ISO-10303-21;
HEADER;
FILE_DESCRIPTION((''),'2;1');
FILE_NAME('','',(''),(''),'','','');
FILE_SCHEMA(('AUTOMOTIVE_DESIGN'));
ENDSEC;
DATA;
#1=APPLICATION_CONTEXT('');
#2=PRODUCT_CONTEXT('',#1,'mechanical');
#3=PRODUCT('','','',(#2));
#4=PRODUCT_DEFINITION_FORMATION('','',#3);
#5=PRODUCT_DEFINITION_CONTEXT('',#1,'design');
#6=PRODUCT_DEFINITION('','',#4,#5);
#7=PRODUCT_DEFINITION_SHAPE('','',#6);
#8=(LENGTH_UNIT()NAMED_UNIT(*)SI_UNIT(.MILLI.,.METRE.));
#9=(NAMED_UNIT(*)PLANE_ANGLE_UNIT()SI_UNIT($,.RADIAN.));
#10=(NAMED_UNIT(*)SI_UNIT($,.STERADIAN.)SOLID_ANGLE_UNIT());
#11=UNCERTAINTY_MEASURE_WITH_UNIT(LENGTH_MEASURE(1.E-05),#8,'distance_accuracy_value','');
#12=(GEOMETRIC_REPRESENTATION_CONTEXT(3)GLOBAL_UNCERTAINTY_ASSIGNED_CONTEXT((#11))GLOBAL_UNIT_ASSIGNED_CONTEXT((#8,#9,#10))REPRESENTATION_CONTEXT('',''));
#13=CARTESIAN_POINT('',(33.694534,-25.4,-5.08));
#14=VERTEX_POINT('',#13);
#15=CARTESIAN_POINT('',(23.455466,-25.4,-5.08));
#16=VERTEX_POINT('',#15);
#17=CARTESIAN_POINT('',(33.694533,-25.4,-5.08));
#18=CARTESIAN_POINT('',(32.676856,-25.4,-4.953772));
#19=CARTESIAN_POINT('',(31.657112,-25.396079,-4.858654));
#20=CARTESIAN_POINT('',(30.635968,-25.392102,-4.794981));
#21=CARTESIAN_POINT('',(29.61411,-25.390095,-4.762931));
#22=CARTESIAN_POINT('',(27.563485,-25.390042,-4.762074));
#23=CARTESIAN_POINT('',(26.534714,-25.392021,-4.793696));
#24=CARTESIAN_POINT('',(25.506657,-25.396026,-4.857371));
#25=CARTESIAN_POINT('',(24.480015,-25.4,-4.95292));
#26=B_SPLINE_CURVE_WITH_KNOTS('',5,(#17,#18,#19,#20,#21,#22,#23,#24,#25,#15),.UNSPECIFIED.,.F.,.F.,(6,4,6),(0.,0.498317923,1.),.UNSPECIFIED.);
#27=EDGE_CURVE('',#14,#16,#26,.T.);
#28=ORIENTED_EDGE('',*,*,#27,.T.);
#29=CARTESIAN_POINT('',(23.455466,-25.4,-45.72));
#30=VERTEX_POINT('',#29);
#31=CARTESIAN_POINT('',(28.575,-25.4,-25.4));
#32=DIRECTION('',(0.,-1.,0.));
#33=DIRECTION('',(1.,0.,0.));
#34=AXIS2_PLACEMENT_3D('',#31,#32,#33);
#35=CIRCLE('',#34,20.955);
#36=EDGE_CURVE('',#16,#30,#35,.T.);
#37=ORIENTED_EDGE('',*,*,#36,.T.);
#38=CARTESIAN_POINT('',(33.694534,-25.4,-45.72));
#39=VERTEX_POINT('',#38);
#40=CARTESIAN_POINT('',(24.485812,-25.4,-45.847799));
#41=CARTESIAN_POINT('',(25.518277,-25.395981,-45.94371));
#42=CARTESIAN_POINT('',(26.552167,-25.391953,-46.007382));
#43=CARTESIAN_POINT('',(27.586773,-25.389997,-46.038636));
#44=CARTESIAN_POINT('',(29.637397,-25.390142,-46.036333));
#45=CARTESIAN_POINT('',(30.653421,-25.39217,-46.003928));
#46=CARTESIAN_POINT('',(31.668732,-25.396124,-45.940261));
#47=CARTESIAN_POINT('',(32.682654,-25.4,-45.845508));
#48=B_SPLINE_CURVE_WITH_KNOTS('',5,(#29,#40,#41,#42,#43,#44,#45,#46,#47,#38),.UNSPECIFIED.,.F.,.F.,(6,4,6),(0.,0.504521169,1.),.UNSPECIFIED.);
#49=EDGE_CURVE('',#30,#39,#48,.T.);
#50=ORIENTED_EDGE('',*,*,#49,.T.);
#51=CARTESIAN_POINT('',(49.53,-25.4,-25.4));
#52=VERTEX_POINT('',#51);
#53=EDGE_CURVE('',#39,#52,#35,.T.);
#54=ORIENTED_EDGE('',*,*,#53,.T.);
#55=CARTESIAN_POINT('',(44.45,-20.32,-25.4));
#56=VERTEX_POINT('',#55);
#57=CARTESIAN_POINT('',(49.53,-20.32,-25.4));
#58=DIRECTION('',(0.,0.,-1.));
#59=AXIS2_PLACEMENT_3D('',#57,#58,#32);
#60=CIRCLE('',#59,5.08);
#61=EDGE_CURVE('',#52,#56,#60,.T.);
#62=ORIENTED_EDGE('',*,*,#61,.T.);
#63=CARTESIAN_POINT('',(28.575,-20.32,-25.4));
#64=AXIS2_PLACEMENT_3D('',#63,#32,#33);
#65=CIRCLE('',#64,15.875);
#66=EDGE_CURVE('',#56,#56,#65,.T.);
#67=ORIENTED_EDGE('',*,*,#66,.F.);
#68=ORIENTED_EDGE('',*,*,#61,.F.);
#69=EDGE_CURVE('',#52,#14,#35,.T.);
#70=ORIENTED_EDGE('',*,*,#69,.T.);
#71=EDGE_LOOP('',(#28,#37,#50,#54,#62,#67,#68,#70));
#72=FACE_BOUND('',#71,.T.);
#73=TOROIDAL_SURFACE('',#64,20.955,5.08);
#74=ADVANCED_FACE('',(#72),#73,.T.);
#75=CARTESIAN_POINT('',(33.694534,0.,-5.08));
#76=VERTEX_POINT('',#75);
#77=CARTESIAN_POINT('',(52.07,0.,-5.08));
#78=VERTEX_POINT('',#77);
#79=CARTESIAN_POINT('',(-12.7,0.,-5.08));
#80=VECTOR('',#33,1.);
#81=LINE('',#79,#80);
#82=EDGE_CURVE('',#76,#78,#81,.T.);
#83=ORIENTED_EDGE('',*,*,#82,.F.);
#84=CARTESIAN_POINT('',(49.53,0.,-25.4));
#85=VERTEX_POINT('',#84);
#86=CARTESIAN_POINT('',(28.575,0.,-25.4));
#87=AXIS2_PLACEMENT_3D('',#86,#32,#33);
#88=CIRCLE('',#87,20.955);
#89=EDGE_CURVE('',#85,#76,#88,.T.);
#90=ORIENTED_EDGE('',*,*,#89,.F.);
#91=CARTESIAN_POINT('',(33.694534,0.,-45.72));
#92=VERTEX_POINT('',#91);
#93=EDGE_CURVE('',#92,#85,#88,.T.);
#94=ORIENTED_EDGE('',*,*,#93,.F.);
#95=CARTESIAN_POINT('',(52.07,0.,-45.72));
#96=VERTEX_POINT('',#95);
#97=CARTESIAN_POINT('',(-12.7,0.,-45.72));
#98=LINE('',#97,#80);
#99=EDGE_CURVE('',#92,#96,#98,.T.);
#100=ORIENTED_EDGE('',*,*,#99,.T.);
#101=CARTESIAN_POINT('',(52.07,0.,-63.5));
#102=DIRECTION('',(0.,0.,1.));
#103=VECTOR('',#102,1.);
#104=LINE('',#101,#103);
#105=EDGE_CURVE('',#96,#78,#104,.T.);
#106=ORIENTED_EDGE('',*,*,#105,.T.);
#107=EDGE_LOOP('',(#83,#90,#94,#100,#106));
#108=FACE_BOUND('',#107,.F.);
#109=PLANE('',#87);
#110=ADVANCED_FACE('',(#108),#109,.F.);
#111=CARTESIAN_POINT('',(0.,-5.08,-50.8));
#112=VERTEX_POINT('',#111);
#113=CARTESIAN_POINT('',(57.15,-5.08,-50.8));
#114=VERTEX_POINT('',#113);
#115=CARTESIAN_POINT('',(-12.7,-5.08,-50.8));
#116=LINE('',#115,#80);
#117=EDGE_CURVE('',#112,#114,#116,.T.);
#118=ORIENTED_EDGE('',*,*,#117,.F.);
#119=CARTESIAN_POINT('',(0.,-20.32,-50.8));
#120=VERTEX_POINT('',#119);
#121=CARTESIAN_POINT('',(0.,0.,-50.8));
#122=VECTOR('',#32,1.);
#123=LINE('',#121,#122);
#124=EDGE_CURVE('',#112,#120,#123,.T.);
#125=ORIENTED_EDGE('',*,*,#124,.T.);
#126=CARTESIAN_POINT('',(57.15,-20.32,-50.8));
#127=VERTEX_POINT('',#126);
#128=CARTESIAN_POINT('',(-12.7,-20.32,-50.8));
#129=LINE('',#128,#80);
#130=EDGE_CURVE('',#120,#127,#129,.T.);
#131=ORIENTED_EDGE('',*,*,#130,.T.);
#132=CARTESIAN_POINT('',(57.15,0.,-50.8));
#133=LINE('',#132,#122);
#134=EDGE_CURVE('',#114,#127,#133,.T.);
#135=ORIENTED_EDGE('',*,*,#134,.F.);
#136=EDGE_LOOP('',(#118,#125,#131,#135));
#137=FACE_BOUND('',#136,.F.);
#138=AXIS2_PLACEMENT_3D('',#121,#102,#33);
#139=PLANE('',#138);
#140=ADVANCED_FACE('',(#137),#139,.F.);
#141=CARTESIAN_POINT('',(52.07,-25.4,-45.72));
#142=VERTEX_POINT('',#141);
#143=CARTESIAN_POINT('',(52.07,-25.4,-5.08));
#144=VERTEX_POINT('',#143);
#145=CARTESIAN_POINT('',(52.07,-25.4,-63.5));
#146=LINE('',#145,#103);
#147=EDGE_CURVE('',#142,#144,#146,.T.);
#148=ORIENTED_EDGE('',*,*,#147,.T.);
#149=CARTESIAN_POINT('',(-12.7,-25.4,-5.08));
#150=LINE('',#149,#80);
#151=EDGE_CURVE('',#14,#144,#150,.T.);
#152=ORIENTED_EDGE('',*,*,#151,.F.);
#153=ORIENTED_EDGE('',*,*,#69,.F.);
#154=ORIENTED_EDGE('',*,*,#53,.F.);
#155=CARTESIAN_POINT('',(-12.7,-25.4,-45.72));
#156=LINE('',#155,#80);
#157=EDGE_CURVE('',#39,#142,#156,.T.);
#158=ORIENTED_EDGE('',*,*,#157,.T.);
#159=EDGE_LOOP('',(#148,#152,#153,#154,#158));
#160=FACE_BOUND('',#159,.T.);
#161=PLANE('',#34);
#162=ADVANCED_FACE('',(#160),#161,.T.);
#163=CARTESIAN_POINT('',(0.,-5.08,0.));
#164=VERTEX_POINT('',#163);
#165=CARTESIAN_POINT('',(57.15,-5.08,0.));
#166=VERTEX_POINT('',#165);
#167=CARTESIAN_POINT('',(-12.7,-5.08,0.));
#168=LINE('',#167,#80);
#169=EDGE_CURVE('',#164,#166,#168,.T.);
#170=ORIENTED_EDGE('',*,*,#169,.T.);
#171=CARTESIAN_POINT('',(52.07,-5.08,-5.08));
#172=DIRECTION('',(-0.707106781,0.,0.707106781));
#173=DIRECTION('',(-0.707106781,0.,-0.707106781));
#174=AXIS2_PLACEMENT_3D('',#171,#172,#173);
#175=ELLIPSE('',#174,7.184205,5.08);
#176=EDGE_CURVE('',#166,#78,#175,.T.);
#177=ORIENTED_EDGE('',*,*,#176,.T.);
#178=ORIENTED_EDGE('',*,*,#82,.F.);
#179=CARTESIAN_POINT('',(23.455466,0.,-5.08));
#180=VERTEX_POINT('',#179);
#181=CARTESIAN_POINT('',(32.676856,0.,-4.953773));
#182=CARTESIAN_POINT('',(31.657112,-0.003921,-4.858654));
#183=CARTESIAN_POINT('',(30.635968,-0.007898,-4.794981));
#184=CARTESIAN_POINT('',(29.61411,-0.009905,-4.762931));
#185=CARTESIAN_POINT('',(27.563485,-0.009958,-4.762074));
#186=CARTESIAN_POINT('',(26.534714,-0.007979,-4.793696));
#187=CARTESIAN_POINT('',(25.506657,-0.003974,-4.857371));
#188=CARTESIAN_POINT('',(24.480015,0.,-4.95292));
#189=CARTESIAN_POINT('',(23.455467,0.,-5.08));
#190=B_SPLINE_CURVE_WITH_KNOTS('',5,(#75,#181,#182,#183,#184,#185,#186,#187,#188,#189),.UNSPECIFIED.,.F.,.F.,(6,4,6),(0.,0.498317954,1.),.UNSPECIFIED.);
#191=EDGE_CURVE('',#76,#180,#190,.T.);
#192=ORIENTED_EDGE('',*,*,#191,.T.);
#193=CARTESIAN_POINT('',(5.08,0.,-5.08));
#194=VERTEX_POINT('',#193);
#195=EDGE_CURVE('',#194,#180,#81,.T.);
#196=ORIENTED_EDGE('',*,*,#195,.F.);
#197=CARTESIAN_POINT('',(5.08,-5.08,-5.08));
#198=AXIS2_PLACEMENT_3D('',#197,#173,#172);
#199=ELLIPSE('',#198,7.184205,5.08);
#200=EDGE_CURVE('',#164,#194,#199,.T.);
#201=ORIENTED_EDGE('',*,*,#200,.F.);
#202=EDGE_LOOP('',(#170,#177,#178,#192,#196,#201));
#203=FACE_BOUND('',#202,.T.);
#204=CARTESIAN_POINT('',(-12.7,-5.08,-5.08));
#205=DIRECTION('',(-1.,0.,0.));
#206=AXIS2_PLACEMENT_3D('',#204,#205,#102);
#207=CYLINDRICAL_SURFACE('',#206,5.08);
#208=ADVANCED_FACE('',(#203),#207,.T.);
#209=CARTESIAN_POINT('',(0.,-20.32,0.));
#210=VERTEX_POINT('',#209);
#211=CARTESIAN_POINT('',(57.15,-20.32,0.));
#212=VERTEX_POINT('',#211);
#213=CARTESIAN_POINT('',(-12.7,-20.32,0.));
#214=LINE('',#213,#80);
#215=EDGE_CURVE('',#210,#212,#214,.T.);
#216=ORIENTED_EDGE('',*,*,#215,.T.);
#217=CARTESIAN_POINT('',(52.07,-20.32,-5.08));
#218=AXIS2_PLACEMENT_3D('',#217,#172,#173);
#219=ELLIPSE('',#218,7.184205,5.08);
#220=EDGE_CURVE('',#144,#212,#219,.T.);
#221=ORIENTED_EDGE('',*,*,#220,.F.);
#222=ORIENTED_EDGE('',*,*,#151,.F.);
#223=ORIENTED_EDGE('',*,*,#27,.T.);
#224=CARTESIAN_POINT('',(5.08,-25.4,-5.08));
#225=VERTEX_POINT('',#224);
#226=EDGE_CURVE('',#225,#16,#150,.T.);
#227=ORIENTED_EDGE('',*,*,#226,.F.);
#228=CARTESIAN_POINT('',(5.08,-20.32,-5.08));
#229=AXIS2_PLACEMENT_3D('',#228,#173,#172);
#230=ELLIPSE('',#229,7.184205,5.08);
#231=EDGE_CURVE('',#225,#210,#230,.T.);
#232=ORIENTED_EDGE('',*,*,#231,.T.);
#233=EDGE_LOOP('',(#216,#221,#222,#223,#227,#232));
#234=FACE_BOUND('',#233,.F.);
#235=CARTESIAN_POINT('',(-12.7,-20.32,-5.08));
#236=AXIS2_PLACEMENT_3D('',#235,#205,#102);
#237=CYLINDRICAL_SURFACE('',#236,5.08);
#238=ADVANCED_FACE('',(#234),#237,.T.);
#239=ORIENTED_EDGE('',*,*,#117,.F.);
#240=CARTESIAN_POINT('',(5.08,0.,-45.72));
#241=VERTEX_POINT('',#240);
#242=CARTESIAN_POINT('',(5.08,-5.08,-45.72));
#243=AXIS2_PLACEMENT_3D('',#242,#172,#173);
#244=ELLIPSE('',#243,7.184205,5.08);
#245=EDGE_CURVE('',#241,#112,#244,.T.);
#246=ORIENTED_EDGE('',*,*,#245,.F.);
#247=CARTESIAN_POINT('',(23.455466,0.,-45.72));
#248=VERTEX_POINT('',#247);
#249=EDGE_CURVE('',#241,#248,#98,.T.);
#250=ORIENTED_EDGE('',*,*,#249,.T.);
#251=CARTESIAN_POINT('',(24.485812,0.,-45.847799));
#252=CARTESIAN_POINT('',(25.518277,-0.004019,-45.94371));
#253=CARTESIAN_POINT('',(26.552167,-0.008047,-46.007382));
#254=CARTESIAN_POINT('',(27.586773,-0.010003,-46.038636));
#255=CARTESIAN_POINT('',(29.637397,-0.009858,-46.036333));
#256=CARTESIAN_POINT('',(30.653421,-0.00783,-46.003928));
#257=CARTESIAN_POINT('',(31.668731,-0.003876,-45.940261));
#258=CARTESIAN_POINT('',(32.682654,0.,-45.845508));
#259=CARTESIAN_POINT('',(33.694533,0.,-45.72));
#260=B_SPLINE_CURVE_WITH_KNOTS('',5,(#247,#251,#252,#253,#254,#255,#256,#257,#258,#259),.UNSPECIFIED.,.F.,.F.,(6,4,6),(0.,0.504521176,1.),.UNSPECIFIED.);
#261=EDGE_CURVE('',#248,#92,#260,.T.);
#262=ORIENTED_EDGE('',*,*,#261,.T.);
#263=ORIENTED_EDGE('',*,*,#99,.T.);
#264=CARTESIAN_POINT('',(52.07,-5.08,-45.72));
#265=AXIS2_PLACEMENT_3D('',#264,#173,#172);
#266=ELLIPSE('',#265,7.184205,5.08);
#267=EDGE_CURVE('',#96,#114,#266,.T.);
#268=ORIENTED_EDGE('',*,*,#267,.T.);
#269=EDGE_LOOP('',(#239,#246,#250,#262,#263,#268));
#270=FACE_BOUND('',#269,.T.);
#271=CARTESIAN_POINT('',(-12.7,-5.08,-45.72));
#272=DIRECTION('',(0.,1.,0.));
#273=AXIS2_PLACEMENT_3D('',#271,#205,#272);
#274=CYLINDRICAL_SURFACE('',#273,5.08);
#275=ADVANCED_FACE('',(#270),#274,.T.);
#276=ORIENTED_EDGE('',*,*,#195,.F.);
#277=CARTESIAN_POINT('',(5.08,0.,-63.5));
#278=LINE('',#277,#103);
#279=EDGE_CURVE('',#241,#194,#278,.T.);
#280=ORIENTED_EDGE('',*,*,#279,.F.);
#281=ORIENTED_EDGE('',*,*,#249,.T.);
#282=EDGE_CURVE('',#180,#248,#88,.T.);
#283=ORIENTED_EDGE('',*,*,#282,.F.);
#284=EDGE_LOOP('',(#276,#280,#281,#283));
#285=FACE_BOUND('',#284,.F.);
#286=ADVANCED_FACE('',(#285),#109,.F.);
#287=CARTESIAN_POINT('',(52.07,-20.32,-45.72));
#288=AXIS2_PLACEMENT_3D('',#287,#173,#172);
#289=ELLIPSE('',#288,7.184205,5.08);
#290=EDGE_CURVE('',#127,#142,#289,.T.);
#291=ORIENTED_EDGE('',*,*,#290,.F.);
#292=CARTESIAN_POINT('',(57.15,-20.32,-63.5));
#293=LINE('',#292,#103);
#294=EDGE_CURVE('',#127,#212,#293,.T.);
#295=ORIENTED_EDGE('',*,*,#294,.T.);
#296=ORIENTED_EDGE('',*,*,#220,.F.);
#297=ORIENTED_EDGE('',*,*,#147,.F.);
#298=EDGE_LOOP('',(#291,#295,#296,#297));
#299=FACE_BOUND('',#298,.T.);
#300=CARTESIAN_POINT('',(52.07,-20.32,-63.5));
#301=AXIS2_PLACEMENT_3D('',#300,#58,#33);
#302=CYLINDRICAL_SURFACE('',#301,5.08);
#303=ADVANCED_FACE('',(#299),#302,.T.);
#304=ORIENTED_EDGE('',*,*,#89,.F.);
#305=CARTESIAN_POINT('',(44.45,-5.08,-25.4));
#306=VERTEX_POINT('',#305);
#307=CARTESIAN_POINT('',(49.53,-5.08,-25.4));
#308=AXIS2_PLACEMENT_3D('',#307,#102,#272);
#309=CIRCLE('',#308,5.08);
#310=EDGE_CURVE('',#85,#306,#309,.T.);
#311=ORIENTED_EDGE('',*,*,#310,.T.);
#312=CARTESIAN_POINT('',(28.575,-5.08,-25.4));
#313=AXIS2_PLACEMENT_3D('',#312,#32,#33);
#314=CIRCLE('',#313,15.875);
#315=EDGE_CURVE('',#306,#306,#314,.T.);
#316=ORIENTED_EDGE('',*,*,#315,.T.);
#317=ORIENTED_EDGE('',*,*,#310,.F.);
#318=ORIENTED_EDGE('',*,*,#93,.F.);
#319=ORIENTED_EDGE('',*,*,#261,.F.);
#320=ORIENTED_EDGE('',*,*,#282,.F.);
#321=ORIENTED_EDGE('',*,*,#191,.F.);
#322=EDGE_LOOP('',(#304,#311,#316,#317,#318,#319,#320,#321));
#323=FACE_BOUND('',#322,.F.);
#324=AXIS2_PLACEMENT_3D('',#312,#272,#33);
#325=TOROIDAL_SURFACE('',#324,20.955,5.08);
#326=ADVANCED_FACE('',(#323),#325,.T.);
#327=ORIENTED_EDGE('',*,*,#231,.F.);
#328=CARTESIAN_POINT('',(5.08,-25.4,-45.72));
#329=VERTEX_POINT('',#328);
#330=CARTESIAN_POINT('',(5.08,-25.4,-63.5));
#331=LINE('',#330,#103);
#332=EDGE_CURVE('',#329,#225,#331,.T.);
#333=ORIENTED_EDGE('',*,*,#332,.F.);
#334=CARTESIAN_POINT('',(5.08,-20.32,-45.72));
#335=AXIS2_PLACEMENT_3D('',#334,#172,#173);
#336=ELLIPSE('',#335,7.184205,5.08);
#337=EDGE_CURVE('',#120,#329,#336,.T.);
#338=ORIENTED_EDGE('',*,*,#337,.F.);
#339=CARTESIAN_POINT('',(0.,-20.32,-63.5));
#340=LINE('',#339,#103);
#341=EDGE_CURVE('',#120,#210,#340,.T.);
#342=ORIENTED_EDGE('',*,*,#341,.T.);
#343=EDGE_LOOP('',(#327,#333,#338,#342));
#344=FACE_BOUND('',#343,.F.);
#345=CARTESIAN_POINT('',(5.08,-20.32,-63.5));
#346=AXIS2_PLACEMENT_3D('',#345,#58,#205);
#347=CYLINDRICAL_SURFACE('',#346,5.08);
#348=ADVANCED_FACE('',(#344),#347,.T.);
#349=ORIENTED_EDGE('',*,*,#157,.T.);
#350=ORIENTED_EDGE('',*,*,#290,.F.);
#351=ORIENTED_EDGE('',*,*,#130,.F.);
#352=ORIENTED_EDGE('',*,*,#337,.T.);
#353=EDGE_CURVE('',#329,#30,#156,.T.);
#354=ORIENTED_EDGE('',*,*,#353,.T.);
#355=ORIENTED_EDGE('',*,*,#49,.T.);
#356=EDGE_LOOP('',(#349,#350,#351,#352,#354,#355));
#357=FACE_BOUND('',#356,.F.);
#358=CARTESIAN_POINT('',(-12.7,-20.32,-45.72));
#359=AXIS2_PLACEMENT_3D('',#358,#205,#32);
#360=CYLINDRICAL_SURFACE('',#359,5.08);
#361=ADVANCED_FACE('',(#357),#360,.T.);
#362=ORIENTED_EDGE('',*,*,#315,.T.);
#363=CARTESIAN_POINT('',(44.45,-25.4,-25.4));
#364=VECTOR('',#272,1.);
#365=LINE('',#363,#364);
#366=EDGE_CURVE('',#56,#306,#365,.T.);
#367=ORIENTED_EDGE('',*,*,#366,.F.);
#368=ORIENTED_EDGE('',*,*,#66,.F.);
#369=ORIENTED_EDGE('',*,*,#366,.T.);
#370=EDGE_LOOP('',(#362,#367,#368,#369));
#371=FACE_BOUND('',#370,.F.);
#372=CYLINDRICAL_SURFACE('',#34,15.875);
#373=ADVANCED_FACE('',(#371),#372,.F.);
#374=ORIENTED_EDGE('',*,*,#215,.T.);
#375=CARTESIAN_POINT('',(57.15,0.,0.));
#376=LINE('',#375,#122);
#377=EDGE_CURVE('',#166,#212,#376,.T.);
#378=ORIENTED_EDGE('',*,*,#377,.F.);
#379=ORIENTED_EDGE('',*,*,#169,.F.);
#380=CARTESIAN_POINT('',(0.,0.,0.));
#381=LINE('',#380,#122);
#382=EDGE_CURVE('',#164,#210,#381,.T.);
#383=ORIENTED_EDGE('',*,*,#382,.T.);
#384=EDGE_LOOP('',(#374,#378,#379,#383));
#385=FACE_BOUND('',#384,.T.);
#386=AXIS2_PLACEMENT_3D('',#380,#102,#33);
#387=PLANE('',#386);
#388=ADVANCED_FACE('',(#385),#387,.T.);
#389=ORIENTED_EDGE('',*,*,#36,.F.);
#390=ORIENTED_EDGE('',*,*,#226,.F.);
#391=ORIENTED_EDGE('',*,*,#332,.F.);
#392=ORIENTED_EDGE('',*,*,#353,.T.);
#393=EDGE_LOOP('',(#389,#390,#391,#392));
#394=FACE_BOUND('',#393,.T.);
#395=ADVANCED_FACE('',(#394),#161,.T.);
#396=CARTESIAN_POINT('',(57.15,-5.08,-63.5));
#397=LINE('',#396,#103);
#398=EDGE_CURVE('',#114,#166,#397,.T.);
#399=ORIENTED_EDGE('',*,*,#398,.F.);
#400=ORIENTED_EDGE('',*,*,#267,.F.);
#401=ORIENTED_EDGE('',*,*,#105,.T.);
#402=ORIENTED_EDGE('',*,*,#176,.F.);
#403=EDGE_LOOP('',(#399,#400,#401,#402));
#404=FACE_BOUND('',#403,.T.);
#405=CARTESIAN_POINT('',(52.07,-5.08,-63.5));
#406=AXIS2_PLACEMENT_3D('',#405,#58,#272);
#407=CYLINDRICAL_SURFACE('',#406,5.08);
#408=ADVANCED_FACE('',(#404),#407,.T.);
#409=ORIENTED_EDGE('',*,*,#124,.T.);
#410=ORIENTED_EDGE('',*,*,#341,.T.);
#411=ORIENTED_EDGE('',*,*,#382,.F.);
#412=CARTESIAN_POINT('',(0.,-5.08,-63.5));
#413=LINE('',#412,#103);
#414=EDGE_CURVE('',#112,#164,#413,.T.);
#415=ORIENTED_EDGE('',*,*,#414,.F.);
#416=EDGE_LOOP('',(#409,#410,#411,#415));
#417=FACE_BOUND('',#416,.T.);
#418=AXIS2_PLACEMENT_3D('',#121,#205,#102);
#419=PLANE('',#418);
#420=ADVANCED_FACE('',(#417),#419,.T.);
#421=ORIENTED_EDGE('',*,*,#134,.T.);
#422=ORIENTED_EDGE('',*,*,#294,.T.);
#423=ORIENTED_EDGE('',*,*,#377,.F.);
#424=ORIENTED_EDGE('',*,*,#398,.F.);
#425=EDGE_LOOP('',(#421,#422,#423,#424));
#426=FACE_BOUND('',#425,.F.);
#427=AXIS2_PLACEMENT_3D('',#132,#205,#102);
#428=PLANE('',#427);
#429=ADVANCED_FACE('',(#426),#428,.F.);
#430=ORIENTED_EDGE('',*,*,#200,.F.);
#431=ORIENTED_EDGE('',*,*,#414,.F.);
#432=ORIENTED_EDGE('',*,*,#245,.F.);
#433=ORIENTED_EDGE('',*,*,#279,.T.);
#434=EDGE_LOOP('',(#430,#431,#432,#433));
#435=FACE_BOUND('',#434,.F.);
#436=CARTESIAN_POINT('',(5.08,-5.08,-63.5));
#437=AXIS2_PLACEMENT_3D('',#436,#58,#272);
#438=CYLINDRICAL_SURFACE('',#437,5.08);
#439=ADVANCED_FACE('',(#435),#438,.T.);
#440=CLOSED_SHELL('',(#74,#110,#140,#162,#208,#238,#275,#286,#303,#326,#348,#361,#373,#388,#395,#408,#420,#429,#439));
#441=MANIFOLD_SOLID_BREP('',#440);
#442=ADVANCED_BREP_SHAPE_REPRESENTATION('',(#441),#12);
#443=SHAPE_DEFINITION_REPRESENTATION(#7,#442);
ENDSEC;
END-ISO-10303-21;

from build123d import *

# Parameters (mm, degrees)
F0_W        = 57.15
F0_H        = 50.8
F1_DEPTH    = 25.4
F2_DEPTH    = 25.4
F3_DEPTH    = 25.4
F4_R        = 15.875
F5_DEPTH    = 25.4
F6_T1_DEPTH = 82.55
F6_T3_DEPTH = 76.2
F7_T1_DEPTH = 82.55
F7_T3_DEPTH = 76.2


# Not quite as in the source:
# - a fillet or chamfer that OpenCascade refuses, or shapes differently, is made with other operations: its cross-section is extruded or revolved along the edge and cut away or added


with BuildPart() as f1:
    # F0 (on Front) → F1 (new body)
    with BuildSketch(Plane.XZ):
        with Locations((28.575, -25.4)):
            Rectangle(F0_W, F0_H)
    extrude(amount=F1_DEPTH)

    # F0 (on Front) → F2 (join)
    with BuildSketch(Plane.XZ):
        with Locations((28.575, -25.4)):
            Rectangle(F0_W, F0_H)
    extrude(amount=F2_DEPTH)

    # F0 (on Front) → F3 (join)
    with BuildSketch(Plane.XZ):
        with Locations((28.575, -25.4)):
            Rectangle(F0_W, F0_H)
    extrude(amount=F3_DEPTH)

    # F4 (on face) → F5 (cut)
    with BuildSketch(Plane.XZ.offset(25.4)):
        with Locations((28.575, -25.4)):
            Circle(F4_R)
    extrude(amount=-F5_DEPTH, mode=Mode.SUBTRACT)

    # F6: fillet of radius 5.08 on 5 edges, made by hand

    # F6_s2 → F6_t1 (cut)
    with BuildSketch(Plane.YZ.offset(-12.7)):
        with BuildLine():
            ThreePointArc((-20.32, 0), (-23.9121024484, -1.4878975516), (-25.4, -5.08))
            Line((-25.4, -5.08), (-25.4, 0))
            Line((-25.4, 0), (-20.32, 0))
        make_face()
        with BuildLine():
            ThreePointArc((-25.4, -45.72), (-23.9121024484, -49.3121024484), (-20.32, -50.8))
            Line((-20.32, -50.8), (-25.4, -50.8))
            Line((-25.4, -50.8), (-25.4, -45.72))
        make_face()
    extrude(amount=F6_T1_DEPTH, mode=Mode.SUBTRACT)

    # F6_s4 → F6_t3 (cut)
    with BuildSketch(Plane.XY.offset(-63.5)):
        with BuildLine():
            ThreePointArc((57.15, -20.32), (55.6621024484, -23.9121024484), (52.07, -25.4))
            Line((52.07, -25.4), (57.15, -25.4))
            Line((57.15, -25.4), (57.15, -20.32))
        make_face()
        with BuildLine():
            ThreePointArc((0, -20.32), (1.4878975516, -23.9121024484), (5.08, -25.4))
            Line((5.08, -25.4), (0, -25.4))
            Line((0, -25.4), (0, -20.32))
        make_face()
    extrude(amount=F6_T3_DEPTH, mode=Mode.SUBTRACT)

    # F6_s5 → F6_t6 (revolve, cut)
    with BuildSketch(Plane.XY.offset(-25.4)):
        with BuildLine():
            ThreePointArc((49.53, -25.4), (45.9378975516, -23.9121024484), (44.45, -20.32))
            Line((44.45, -20.32), (44.45, -25.4))
            Line((44.45, -25.4), (49.53, -25.4))
        make_face()
    revolve(axis=Axis((28.575, -25.4, -25.4), (0, -1, 0)), mode=Mode.SUBTRACT)

    # F7: fillet of radius 5.08 on 5 edges, made by hand

    # F7_s2 → F7_t1 (cut)
    with BuildSketch(Plane.YZ.offset(-12.7)):
        with BuildLine():
            ThreePointArc((-5.08, 0), (-1.4878975516, -1.4878975516), (0, -5.08))
            Line((0, -5.08), (0, 0))
            Line((0, 0), (-5.08, 0))
        make_face()
        with BuildLine():
            ThreePointArc((0, -45.72), (-1.4878975516, -49.3121024484), (-5.08, -50.8))
            Line((-5.08, -50.8), (0, -50.8))
            Line((0, -50.8), (0, -45.72))
        make_face()
    extrude(amount=F7_T1_DEPTH, mode=Mode.SUBTRACT)

    # F7_s4 → F7_t3 (cut)
    with BuildSketch(Plane.XY.offset(-63.5)):
        with BuildLine():
            ThreePointArc((52.07, 0), (55.6621024484, -1.4878975516), (57.15, -5.08))
            Line((57.15, -5.08), (57.15, 0))
            Line((57.15, 0), (52.07, 0))
        make_face()
        with BuildLine():
            ThreePointArc((5.08, 0), (1.4878975516, -1.4878975516), (0, -5.08))
            Line((0, -5.08), (0, 0))
            Line((0, 0), (5.08, 0))
        make_face()
    extrude(amount=F7_T3_DEPTH, mode=Mode.SUBTRACT)

    # F7_s5 → F7_t6 (revolve, cut)
    with BuildSketch(Plane.XY.offset(-25.4)):
        with BuildLine():
            ThreePointArc((49.53, 0), (45.9378975516, -1.4878975516), (44.45, -5.08))
            Line((44.45, -5.08), (44.45, 0))
            Line((44.45, 0), (49.53, 0))
        make_face()
    revolve(axis=Axis((28.575, 0, -25.4), (0, -1, 0)), mode=Mode.SUBTRACT)


solid = f1.part
